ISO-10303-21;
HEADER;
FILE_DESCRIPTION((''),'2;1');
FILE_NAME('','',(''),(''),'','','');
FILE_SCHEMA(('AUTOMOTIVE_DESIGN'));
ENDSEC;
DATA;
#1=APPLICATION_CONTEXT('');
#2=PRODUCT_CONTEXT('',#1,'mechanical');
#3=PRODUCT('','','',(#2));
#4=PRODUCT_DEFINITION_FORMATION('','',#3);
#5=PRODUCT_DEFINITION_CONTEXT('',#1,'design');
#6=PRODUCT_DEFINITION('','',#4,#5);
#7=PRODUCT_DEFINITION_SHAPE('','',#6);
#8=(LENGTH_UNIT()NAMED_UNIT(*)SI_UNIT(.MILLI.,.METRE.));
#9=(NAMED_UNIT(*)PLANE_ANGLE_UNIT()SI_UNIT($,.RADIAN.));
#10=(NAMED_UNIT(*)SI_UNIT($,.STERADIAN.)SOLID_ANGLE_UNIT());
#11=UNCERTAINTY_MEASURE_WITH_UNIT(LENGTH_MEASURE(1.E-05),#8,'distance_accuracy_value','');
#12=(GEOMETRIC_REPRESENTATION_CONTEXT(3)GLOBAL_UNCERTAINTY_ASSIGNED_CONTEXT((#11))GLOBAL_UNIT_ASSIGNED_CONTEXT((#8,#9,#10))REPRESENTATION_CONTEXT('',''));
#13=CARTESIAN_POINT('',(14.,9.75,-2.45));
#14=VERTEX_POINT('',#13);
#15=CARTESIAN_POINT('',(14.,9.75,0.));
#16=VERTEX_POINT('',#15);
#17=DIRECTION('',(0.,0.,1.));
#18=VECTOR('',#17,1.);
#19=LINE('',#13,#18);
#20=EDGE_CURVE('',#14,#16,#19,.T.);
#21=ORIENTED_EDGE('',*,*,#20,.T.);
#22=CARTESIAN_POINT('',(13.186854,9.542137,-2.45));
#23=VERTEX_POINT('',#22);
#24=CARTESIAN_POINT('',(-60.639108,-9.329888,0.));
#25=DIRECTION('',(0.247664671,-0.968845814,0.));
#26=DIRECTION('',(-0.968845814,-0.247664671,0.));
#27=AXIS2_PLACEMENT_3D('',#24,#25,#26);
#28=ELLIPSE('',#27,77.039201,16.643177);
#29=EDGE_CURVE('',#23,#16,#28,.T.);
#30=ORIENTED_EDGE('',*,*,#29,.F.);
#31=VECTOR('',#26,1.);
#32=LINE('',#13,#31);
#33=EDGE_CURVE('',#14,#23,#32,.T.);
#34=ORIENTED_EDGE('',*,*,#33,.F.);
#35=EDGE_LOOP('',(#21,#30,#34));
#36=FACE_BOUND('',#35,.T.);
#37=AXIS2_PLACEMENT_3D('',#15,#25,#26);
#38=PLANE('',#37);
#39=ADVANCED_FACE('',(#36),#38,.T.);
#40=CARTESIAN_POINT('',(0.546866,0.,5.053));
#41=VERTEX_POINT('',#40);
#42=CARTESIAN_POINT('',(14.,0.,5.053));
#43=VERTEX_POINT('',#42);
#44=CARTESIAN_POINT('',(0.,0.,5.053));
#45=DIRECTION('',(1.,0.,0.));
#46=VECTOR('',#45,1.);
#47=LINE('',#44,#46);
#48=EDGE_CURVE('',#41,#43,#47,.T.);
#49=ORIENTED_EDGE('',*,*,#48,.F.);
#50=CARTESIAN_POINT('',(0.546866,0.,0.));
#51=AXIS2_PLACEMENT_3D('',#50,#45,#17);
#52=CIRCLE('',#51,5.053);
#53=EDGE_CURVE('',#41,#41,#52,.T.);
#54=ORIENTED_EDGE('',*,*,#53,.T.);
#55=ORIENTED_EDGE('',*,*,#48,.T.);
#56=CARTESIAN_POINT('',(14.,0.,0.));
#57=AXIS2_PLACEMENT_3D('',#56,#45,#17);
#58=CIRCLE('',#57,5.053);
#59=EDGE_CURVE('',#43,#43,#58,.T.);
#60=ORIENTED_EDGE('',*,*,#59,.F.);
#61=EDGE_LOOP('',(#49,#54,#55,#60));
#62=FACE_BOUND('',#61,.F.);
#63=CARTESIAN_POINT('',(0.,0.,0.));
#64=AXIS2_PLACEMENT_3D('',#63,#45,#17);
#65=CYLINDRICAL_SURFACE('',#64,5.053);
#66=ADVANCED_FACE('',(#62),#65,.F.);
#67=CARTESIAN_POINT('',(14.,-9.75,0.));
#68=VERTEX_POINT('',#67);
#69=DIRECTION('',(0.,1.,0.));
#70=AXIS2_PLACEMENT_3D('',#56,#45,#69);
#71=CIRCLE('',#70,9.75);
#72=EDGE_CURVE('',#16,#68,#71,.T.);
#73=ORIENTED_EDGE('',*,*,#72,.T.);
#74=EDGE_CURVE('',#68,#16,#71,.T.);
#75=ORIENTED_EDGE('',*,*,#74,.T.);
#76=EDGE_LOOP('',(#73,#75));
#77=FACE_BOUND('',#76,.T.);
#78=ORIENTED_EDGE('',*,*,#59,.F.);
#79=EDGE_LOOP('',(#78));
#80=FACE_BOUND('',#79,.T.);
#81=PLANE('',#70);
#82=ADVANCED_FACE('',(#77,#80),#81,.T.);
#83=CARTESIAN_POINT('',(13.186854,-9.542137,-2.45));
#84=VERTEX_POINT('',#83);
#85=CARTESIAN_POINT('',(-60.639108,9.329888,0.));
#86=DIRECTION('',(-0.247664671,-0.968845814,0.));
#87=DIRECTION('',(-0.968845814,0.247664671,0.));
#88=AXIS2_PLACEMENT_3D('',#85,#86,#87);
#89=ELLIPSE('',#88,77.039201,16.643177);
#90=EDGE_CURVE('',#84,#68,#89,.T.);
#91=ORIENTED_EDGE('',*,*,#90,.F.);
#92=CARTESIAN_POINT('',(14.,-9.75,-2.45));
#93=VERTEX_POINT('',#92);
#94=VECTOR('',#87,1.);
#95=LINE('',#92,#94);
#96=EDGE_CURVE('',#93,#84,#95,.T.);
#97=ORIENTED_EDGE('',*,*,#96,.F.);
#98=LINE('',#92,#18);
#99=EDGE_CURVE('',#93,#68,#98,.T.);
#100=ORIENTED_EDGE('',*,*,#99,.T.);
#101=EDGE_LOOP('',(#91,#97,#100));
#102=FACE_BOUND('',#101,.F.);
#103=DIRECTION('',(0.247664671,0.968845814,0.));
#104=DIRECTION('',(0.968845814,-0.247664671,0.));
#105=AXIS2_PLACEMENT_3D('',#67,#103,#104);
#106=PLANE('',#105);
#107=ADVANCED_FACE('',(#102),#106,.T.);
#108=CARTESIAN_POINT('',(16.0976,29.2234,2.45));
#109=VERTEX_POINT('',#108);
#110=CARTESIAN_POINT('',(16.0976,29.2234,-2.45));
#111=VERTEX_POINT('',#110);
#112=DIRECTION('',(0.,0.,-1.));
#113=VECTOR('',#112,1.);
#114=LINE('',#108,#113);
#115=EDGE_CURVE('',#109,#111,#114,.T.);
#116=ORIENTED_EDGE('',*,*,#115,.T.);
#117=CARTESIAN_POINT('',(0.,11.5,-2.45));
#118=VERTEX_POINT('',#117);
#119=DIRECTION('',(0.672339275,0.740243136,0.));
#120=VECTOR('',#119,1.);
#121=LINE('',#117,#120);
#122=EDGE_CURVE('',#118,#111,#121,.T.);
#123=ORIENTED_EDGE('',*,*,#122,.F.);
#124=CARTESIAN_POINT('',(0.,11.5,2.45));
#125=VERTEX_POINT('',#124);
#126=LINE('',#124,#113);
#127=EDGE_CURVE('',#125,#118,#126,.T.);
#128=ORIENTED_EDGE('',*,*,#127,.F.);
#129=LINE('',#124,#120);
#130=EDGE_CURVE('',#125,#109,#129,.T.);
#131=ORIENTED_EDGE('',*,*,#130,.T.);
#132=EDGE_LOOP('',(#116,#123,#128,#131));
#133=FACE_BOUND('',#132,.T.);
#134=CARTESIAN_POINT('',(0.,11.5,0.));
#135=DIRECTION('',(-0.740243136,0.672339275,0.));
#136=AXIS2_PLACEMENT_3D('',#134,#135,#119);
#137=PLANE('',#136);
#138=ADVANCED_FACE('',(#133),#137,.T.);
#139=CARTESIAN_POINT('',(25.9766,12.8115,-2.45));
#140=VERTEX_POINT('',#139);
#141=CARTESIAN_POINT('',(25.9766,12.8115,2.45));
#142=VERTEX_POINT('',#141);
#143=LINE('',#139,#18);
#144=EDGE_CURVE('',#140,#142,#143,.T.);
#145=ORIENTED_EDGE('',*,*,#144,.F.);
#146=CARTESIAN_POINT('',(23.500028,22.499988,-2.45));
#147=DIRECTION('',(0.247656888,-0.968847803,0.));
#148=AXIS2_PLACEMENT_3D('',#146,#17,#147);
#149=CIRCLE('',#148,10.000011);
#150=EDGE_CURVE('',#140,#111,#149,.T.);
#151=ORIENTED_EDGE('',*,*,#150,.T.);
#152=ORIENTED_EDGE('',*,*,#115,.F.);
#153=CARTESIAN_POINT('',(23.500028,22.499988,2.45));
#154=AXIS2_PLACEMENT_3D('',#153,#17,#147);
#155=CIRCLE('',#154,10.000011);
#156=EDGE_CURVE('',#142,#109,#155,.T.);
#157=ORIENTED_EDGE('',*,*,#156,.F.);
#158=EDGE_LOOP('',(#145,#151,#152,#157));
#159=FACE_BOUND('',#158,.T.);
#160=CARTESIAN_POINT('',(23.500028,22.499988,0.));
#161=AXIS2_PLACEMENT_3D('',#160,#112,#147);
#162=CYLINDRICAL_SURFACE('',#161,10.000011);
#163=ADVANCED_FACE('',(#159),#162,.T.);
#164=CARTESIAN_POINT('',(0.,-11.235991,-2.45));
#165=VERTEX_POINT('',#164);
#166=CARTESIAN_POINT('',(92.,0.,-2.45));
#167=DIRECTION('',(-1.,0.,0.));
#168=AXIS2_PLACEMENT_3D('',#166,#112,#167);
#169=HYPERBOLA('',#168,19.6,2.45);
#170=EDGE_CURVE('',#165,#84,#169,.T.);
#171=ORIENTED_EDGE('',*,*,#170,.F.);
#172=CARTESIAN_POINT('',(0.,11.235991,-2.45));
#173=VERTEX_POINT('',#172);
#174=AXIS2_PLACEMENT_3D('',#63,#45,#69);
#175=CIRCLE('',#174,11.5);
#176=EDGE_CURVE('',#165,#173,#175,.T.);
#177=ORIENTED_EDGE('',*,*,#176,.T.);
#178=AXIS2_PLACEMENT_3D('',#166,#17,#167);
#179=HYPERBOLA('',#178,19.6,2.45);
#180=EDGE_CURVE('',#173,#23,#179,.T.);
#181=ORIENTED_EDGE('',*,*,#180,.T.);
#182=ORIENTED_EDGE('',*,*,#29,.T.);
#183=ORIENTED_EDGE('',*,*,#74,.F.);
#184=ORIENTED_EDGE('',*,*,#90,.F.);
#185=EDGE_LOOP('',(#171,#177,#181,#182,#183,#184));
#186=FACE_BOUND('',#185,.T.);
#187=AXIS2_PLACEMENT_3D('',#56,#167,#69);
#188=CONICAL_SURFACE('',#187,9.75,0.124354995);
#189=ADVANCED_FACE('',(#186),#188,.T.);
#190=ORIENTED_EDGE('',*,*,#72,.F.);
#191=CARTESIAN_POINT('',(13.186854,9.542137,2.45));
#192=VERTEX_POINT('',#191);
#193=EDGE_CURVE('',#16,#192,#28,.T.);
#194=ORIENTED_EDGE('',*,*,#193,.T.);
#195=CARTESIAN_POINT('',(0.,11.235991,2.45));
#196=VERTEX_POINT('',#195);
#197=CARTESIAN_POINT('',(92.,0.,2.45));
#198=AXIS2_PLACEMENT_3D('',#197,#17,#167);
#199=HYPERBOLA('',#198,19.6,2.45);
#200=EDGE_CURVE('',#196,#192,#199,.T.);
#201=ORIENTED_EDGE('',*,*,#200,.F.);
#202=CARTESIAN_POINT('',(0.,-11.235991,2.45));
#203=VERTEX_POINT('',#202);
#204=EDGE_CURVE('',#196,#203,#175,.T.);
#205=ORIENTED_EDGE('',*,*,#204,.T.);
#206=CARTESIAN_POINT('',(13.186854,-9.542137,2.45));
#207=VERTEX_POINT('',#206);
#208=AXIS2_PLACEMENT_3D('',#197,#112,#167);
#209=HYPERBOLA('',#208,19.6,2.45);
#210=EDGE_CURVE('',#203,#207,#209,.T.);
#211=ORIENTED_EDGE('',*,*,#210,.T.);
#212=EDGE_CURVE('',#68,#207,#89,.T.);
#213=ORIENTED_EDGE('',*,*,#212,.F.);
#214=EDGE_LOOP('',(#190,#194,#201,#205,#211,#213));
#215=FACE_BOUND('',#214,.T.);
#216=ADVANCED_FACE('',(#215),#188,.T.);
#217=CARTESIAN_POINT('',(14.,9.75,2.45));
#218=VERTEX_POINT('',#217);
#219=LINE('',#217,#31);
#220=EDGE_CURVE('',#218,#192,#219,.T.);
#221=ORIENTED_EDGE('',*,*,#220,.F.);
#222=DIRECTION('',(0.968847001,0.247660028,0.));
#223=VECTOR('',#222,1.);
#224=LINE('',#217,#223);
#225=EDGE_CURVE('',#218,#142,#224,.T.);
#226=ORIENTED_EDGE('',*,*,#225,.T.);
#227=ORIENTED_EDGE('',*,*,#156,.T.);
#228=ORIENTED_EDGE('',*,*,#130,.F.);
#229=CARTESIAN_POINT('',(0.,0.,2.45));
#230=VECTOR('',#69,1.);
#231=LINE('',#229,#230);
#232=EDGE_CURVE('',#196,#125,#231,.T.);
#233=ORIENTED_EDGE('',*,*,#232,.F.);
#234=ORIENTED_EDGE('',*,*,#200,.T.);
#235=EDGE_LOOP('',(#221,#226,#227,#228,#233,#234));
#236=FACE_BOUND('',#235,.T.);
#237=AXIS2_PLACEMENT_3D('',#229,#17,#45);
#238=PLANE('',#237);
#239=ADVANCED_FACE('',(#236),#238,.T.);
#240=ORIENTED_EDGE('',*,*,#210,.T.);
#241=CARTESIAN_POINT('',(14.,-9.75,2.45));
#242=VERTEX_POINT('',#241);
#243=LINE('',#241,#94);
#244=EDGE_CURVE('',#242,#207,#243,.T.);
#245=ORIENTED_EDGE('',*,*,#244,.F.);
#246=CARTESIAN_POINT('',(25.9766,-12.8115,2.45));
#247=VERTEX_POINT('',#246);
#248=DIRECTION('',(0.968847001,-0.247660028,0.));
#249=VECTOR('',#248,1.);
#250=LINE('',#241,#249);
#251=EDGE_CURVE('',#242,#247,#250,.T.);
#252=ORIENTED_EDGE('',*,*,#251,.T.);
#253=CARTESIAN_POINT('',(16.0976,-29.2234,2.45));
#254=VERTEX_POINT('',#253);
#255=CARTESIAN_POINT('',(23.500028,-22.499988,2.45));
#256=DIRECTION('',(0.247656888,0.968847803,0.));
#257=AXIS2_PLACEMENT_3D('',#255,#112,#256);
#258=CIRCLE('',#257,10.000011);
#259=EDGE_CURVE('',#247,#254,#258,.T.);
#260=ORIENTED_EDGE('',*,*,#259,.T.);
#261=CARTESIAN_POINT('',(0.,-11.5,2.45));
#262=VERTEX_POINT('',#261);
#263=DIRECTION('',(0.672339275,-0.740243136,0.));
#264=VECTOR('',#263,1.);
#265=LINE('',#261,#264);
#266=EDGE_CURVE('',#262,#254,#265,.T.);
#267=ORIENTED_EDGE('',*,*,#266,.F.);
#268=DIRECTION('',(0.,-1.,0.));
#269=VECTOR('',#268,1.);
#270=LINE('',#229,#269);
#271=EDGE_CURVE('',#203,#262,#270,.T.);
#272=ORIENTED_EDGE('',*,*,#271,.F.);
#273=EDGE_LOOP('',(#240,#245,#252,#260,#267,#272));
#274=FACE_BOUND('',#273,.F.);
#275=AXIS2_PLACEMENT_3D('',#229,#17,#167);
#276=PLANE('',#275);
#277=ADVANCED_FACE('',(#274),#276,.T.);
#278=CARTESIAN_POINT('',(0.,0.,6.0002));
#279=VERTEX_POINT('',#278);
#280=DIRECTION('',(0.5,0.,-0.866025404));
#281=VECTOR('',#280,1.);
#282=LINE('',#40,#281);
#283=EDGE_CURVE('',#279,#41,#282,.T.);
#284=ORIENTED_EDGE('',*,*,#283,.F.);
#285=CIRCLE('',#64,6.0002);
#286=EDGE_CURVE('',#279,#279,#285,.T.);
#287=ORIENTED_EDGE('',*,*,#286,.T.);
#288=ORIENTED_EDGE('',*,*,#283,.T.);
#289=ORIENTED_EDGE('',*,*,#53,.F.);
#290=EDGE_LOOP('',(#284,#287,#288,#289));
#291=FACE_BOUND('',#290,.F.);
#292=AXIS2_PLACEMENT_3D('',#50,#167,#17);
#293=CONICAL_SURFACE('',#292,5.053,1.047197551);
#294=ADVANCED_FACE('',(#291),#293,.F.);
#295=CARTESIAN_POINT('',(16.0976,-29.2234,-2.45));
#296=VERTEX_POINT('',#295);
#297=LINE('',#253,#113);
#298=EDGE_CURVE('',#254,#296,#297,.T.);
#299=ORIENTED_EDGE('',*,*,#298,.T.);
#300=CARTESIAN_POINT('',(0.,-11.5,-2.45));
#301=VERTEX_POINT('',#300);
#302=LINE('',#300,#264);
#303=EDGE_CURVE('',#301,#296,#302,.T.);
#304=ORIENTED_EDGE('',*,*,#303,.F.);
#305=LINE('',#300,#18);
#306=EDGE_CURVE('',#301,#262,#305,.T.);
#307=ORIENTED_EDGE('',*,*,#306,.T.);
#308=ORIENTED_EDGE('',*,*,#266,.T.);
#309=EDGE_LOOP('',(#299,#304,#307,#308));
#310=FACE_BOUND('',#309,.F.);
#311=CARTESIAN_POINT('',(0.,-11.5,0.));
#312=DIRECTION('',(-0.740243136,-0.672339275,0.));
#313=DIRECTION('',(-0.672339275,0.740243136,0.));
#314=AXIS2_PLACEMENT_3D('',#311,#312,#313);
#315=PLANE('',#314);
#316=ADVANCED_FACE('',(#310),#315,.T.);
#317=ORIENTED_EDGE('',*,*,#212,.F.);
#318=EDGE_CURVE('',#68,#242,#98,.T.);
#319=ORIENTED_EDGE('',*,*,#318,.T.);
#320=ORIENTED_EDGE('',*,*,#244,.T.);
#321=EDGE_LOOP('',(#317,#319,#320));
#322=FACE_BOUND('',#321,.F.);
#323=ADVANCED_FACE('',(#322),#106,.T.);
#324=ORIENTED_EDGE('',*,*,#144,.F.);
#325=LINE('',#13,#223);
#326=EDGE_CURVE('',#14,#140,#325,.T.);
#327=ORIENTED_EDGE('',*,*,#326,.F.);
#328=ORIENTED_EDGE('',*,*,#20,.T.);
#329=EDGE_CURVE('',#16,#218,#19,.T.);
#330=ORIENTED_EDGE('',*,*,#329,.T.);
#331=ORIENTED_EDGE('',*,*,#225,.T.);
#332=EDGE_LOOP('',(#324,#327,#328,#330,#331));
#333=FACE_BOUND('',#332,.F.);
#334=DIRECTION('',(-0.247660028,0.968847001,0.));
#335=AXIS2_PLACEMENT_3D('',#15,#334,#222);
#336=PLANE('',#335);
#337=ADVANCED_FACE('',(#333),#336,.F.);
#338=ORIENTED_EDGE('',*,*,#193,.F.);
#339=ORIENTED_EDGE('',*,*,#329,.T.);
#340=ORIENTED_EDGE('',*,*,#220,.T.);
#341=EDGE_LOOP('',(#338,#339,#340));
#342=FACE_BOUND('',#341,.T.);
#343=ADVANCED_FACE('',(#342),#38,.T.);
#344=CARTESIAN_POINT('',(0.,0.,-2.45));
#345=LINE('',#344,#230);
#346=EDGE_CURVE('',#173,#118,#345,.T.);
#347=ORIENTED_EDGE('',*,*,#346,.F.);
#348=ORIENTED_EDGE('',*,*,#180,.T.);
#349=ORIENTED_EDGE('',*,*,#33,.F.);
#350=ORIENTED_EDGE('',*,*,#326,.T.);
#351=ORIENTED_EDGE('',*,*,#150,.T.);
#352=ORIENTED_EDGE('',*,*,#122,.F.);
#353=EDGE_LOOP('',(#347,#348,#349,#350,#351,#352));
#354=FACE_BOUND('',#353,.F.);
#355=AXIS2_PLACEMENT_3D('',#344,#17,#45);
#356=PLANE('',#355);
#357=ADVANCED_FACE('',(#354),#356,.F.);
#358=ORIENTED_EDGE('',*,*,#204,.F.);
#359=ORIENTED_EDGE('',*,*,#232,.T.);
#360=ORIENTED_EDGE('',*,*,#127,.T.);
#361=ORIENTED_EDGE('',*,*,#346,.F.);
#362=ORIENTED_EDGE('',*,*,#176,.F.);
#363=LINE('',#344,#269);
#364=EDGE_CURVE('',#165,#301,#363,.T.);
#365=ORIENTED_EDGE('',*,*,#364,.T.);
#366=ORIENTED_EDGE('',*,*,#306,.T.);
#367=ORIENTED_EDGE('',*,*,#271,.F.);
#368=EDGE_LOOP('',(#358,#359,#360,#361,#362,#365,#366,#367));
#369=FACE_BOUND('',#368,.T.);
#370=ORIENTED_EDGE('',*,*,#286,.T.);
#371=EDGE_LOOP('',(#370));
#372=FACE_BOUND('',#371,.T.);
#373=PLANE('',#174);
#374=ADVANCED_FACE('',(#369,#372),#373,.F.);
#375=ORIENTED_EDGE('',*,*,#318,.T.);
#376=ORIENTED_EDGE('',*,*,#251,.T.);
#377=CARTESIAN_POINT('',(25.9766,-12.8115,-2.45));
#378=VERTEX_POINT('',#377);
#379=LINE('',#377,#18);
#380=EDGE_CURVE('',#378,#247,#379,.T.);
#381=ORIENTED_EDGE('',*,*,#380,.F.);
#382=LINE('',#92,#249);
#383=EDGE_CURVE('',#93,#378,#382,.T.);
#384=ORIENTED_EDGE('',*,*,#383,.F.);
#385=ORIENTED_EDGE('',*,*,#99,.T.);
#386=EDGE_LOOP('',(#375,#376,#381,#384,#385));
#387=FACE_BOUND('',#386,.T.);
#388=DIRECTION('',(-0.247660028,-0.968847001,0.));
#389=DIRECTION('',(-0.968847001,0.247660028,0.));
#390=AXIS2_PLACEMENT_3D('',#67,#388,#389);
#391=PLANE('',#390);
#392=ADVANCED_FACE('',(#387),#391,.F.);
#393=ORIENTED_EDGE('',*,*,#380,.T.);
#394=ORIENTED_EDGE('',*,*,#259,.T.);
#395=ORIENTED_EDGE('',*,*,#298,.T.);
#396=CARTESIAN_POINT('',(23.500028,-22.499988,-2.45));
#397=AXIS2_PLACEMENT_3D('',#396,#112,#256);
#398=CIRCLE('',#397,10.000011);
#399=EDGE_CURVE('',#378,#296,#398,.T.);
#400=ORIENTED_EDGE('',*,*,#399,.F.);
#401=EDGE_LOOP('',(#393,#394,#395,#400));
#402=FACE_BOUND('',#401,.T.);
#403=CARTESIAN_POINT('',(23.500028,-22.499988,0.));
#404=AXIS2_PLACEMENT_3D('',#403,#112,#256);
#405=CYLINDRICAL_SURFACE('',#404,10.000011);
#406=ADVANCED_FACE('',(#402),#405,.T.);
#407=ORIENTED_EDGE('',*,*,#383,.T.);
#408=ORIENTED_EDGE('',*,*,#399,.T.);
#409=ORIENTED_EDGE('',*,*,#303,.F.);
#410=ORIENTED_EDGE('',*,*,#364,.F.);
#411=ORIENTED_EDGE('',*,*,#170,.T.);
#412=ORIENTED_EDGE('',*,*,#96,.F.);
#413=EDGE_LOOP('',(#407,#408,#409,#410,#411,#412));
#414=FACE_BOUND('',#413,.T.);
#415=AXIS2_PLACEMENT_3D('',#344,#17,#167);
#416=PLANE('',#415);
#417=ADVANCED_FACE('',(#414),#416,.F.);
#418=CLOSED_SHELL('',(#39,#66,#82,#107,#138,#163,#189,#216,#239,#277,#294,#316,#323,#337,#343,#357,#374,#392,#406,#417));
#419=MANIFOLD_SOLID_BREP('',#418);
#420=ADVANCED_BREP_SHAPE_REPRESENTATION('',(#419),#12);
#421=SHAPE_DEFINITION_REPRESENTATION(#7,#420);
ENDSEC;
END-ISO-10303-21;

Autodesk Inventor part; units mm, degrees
ref_plane "YZ Plane" through (0, 0, 0) normal (1, 0, 0) x (0, 1, 0)
ref_plane "XZ Plane" through (0, 0, 0) normal (0, 1, 0) x (-1, 0, 0)
sketch "Skizze1" plane through (0, 0, 0) normal (0, 0, 1) x (1, 0, 0)
  line L0 (0, 0) -> (14, 0)
  line L1 (0, 0) -> (0, 11.5)
  line L2 (14, 9.75) -> (14, 0)
  line L3 (0, 11.5) -> (16.0976, 29.2234)
  line L4 (14, 9.75) -> (25.9766, 12.8115)
  arc A0 (25.9766, 12.8115) -> (16.0976, 29.2234) centre (23.5, 22.5) ccw
  line L5 (14, 9.75) -> (0, 11.5)
  line L6 (14, 9.75) -> (0, 6.1712)
  dimension "d0" = 19.5
  dimension "d1" = 23.5
  dimension "d2" = 22.5
  dimension "d3" = 10
  dimension "d4" = 14
  dimension "d5" = 23
revolve "Körper" add sketch "Skizze1" angle 360 about axis through (0, 0, 0) along (1, 0, 0) contours L1 L6 L2 L0 | L1 L5 L6
extrude "Flügel1" add sketch "Skizze1" along normal mid plane 4.9 contours L1 L5 L6 | L5 L3 A0 L4
fillet "Rundung1" [suppressed]
mirror "Flügel2" about plane through (0, 0, 0) normal (0, 1, 0) of "Flügel1"
sketch "Skizze2" plane through (0, 0, 0) normal (1, 0, 0) x (0, 1, 0)
  line L0 (0, -14) -> (0, 14) projected
  line L1 (-14, 0) -> (14, 0) projected
  point P0 (0, 0)
hole "Gewinde" at (0, 0, 0) direction (1, 0, 0) diameter 10.106 end through all thread size "M12x1.75" class "6H" standard "ISO Metric profile"
chamfer "Fase1" distance 0.9472 angle 30 1 edges at (0, 0, -5.053) measured on face at (0, -9.1627, 0.203)
ref_plane "Work Plane1" through (76.6567, 0, 0) normal (0, 0, -1) x (1, 0, 0)
equation "\"d0\" = KOD2"
equation "\"d1\" = KOH1 - RR"
equation "\"d2\" = 0.5 * E0 - RR"
equation "\"d3\" = RR"
equation "\"d4\" = KOH"
equation "\"d5\" = KOD"
equation "\"d6\" = SW"
equation "\"d8\" = 0.333333 * SW"
equation "\"d9\" = -0.5 * GD1 + 0.5 * NND"
equation "\"d109\" = -0.5 * GD1 + 0.5 * NND"
equation "\"NND\" = 12"
equation "\"KOH\" = 14"
equation "\"KOH1\" = 33.5"
equation "\"SW\" = 4.9"
equation "\"KOD\" = 23"
equation "\"KOD2\" = 19.5"
equation "\"RR\" = 10"
equation "\"E0\" = 65"
equation "\"GUL\" = 0.541266 * PTC"
equation "\"BOR\" = 0"
equation "\"PTC\" = 1.75"
equation "\"THREADDIA\" = 12"
equation "\"TOA\" = 30deg"
equation "\"RR2\" = 6"
equation "\"SW1\" = 6.4"
equation "\"GAL\" = 0.541266 * PTC"
equation "\"GD1\" = 10.105569"
properties part number "DIN 315 - M12" material "Steel, Mild"
